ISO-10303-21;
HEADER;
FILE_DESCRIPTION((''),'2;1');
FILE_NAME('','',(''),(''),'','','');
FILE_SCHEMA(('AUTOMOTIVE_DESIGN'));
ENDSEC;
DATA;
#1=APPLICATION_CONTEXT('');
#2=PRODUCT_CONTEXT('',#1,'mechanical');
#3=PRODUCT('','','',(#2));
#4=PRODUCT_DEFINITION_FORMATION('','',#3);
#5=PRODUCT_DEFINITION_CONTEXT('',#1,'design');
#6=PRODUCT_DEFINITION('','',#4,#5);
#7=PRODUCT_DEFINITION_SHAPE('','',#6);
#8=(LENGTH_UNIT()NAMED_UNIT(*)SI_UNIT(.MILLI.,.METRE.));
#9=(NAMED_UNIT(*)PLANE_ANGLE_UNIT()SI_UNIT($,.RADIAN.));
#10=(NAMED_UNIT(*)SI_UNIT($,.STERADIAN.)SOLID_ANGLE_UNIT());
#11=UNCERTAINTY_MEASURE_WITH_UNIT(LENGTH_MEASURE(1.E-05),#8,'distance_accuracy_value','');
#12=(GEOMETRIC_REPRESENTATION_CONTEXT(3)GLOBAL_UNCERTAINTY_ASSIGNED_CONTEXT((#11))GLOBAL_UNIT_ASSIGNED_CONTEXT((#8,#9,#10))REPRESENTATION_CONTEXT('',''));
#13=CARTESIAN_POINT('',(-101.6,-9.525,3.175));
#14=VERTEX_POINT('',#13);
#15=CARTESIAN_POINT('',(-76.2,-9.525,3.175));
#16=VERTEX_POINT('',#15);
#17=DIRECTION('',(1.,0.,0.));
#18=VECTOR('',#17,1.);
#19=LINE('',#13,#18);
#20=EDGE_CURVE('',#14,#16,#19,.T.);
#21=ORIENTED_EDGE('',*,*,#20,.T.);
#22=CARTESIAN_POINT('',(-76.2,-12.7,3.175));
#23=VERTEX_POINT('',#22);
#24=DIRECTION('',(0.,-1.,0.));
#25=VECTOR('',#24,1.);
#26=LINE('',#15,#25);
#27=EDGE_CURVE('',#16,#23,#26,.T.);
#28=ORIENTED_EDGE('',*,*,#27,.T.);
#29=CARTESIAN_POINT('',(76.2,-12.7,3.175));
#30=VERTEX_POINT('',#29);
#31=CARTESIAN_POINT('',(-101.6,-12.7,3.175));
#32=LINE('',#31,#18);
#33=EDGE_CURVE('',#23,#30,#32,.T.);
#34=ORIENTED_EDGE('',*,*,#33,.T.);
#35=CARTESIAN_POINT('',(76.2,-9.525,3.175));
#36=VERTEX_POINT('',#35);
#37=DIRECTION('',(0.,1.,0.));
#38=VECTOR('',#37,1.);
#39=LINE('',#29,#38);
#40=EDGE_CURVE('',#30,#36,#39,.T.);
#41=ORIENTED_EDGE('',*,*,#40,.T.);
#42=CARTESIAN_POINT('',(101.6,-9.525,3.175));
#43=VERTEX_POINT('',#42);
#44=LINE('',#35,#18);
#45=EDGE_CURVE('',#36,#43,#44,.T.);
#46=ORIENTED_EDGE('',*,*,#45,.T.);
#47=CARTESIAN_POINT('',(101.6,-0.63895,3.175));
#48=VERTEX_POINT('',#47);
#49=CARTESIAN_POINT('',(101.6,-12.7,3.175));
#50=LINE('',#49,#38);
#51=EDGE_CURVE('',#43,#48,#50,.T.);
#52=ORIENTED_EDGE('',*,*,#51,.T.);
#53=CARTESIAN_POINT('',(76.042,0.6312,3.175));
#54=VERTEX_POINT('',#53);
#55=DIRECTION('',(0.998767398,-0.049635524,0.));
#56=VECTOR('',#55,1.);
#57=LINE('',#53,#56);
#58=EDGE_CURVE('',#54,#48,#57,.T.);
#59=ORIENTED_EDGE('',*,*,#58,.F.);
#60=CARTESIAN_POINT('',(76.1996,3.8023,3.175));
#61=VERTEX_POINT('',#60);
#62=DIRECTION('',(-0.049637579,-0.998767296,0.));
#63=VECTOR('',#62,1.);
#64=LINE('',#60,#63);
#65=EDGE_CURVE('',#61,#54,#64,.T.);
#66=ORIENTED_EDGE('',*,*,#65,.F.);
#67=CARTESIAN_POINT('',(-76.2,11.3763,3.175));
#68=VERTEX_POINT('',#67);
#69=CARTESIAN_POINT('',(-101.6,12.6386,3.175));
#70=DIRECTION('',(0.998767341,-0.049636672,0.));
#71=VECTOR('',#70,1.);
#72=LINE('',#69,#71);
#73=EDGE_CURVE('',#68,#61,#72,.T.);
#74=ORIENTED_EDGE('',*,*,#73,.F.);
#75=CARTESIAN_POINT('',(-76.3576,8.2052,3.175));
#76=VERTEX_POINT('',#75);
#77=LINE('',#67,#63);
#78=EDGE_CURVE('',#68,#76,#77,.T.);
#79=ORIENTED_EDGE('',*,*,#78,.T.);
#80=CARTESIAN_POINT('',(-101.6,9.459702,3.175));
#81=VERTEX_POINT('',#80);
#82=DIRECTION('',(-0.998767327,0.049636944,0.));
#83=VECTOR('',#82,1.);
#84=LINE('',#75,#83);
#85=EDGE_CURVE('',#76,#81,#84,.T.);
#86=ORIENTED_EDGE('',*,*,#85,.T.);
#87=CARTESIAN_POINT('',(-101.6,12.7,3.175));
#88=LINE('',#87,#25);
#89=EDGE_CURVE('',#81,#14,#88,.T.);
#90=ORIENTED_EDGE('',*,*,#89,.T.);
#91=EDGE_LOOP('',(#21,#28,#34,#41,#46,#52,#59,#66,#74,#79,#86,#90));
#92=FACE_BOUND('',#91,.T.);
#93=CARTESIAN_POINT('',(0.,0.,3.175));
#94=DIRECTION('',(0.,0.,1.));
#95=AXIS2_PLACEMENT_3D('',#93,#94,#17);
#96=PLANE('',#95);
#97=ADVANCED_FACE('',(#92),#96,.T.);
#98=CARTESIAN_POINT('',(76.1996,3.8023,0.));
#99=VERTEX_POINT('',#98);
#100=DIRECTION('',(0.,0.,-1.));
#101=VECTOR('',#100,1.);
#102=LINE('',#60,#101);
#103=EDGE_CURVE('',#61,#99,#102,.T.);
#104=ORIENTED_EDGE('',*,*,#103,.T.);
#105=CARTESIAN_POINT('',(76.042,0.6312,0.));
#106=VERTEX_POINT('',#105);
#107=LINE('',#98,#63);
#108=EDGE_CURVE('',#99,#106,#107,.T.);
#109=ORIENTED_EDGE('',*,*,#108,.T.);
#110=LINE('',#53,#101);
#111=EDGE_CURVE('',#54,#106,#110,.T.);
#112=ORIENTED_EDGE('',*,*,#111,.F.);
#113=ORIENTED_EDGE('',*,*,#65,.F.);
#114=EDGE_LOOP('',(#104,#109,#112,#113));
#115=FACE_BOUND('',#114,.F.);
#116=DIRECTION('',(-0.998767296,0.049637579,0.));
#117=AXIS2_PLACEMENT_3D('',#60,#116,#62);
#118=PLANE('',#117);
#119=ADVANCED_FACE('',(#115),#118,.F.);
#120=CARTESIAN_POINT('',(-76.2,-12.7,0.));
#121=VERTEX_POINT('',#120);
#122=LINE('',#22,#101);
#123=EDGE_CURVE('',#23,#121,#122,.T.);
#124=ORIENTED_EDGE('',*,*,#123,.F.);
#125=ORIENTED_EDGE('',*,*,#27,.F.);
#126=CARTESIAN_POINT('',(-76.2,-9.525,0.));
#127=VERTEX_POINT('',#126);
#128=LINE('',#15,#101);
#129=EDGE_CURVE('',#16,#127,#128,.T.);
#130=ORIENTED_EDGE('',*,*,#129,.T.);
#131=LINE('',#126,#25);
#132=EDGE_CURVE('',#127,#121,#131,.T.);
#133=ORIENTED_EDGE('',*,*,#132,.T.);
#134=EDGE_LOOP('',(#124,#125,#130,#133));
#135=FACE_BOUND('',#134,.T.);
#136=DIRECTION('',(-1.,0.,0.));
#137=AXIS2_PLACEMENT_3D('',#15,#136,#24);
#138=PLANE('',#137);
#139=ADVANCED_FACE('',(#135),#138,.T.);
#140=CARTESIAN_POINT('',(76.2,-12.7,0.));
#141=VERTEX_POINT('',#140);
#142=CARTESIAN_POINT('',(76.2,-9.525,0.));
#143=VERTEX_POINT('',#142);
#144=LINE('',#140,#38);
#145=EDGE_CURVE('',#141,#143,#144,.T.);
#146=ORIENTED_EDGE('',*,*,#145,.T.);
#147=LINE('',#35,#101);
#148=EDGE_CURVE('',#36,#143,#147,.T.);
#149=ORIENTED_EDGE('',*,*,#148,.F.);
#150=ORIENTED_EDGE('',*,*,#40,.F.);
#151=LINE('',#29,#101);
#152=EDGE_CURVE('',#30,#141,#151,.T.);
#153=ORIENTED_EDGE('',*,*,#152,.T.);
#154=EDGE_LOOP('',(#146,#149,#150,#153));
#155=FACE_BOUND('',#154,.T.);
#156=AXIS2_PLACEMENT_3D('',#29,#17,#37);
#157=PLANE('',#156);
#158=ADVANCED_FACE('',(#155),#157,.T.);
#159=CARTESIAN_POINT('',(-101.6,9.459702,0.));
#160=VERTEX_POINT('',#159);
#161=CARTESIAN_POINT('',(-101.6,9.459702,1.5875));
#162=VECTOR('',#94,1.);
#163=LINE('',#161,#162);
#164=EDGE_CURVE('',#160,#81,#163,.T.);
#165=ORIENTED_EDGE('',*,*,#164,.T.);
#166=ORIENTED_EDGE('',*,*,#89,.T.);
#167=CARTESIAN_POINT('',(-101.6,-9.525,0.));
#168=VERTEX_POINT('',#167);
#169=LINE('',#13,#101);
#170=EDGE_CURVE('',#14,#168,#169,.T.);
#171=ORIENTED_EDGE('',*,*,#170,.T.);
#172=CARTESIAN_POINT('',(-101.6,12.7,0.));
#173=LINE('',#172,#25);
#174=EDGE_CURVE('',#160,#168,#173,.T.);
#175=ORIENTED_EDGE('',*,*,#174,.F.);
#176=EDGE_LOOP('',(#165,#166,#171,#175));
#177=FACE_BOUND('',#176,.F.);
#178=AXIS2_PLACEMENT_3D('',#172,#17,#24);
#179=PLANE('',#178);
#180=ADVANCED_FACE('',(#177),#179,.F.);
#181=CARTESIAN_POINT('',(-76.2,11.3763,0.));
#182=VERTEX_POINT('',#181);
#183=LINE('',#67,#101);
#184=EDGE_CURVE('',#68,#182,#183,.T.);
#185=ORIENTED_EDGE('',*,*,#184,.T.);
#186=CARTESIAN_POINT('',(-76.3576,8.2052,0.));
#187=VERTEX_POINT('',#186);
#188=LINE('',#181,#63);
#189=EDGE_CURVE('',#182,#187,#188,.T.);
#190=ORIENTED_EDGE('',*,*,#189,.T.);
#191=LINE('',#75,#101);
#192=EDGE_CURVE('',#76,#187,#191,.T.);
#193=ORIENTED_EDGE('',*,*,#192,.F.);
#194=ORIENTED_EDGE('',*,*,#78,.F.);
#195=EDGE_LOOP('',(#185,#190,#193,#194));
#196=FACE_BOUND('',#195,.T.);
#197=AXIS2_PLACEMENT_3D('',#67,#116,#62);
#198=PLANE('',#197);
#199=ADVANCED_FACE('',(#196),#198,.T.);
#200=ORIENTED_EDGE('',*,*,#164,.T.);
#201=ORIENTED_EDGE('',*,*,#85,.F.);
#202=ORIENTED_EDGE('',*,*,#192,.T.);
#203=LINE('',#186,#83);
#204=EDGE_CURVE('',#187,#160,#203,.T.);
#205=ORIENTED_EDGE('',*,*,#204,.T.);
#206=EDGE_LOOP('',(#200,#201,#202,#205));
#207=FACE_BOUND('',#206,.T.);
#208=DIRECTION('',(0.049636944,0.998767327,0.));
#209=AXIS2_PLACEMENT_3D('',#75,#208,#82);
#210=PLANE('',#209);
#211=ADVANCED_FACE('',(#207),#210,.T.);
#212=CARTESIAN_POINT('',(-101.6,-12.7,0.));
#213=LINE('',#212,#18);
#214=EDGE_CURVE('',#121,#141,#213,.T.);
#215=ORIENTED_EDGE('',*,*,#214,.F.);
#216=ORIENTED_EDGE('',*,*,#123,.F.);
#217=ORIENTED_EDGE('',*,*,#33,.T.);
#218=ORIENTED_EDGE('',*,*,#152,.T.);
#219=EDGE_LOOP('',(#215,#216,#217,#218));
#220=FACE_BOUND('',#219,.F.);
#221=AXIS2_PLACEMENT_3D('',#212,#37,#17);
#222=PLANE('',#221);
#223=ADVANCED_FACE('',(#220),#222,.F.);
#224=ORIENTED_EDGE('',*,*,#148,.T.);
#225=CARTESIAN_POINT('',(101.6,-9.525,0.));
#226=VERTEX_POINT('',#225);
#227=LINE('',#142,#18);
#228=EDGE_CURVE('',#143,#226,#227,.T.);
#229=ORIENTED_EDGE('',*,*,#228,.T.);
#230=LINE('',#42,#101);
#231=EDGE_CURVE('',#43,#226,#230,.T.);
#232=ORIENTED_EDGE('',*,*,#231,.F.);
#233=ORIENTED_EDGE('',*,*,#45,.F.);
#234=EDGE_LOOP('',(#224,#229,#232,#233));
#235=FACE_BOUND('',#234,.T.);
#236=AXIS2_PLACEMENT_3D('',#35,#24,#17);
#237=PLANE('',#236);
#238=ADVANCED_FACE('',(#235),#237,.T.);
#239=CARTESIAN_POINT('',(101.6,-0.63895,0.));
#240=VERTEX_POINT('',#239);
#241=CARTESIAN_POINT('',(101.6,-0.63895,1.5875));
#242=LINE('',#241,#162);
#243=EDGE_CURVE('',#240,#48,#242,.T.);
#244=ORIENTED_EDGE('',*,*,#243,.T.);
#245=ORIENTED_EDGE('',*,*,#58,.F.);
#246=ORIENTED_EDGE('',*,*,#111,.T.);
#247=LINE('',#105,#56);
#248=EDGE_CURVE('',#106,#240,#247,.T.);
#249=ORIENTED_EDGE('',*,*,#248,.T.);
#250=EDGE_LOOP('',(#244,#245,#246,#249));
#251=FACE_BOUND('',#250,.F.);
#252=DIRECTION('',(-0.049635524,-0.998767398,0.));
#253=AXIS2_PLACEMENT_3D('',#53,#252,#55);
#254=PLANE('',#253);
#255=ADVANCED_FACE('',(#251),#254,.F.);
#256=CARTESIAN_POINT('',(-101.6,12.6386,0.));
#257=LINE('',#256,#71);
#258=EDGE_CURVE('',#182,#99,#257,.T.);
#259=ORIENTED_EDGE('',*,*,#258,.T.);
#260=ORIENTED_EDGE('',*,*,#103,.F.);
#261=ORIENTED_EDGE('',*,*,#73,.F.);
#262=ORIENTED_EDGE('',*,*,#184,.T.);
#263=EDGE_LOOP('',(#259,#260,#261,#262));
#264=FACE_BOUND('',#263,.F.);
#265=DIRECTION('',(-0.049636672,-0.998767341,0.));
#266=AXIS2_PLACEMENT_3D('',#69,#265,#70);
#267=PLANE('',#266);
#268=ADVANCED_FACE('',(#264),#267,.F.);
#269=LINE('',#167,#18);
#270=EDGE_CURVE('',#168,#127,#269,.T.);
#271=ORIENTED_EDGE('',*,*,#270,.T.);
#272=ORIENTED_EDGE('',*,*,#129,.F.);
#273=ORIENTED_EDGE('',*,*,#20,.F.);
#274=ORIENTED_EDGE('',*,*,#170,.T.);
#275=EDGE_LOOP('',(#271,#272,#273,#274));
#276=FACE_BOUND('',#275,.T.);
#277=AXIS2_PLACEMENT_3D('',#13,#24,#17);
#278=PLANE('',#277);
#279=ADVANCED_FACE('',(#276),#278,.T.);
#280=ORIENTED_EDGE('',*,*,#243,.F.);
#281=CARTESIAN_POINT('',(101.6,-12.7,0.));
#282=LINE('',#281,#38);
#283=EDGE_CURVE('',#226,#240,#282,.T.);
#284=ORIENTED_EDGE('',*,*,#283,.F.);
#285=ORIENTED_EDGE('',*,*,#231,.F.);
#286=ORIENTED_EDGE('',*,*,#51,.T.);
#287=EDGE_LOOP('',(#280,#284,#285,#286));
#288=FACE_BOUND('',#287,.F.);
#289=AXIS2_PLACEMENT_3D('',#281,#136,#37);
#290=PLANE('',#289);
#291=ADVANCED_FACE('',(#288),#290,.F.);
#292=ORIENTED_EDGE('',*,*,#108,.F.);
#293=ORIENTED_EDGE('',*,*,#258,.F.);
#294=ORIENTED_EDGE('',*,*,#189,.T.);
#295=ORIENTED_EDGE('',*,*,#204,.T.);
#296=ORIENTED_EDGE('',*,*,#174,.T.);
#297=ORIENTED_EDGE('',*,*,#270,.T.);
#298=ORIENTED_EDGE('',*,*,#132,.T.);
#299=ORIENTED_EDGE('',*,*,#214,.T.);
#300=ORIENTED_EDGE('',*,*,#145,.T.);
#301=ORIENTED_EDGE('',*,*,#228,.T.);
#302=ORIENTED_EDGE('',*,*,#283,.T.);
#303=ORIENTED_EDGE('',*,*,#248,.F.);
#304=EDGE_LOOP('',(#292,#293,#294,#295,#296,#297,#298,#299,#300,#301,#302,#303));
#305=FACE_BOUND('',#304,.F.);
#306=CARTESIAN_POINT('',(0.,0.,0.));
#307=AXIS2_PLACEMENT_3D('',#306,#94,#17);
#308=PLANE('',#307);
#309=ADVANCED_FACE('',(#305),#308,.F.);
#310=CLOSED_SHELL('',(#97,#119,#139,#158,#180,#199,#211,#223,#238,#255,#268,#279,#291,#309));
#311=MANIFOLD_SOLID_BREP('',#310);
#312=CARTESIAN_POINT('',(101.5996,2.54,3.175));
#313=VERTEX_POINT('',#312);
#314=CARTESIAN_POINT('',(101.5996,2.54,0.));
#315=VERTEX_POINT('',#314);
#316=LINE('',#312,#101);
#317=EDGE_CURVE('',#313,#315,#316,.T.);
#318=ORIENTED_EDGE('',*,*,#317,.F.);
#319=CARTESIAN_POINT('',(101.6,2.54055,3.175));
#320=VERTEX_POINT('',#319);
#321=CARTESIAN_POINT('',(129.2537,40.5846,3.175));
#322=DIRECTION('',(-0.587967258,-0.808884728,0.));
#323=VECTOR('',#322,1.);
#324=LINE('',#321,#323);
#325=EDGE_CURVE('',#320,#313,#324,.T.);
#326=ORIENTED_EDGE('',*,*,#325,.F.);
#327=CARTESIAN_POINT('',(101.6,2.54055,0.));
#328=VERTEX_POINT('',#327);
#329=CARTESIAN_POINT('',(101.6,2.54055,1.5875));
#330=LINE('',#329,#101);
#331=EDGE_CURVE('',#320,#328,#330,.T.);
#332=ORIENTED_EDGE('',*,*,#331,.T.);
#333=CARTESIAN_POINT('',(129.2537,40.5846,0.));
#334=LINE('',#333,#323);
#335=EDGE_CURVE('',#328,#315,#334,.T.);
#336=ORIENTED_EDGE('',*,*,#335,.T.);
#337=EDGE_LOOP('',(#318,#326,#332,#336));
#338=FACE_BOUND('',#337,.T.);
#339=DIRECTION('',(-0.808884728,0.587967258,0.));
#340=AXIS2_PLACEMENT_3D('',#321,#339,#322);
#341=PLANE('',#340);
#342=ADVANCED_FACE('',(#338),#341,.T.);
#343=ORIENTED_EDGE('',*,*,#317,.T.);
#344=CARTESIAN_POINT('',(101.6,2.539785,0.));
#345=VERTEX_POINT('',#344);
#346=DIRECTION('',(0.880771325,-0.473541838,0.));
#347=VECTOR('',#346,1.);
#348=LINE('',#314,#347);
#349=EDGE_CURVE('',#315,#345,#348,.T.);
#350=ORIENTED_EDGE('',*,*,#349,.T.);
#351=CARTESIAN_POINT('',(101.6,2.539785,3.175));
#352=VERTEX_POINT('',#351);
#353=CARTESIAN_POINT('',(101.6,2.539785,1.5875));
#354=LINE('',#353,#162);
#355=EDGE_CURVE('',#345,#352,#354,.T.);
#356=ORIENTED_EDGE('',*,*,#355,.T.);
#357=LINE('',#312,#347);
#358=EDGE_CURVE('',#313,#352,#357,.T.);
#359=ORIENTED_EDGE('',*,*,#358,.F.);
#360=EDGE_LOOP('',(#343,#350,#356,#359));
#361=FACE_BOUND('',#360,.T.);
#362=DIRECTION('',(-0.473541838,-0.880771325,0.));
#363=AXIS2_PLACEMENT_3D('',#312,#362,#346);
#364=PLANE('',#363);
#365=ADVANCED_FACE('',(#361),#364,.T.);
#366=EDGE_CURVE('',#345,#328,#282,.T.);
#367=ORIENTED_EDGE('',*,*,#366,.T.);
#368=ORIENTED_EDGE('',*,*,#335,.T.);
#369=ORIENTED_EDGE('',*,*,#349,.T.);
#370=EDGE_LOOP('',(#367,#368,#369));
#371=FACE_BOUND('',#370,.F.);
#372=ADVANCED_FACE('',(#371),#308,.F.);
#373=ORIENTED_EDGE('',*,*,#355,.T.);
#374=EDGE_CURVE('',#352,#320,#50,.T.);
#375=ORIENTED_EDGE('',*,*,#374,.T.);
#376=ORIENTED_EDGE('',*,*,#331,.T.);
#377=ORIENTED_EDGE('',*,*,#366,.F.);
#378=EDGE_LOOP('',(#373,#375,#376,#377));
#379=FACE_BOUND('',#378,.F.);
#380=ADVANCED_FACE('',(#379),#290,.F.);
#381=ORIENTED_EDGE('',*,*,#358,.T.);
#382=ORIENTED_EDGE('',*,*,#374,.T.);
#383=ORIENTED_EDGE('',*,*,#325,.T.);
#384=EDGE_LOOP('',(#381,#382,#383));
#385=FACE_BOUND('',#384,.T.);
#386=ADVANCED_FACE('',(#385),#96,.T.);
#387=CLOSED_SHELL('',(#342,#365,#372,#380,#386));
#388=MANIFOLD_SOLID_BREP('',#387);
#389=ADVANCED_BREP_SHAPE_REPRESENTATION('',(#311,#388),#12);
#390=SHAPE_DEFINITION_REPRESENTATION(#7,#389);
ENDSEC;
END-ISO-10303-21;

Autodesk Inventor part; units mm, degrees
ref_plane "YZ Plane" through (0, 0, 0) normal (1, 0, 0) x (0, 1, 0)
ref_plane "XZ Plane" through (0, 0, 0) normal (0, 1, 0) x (-1, 0, 0)
ref_plane "XY Plane" through (0, 0, 0) normal (0, 0, 1) x (1, 0, 0)
sketch "Sketch1" plane through (0, 0, 0) normal (0, 0, 1) x (1, 0, 0)
  line L0 (-101.6, -12.7) -> (101.6, -12.7)
  line L1 (101.6, -12.7) -> (101.6, 12.7)
  line L2 (101.6, 12.7) -> (-101.6, 12.7)
  line L3 (-101.6, 12.7) -> (-101.6, -12.7)
  line L4 (-101.6, -12.7) -> (101.6, 12.7) construction
  line L5 (101.6, -12.7) -> (-101.6, 12.7) construction
  point P0 (0, 0)
  dimension "d0" = 203.2
  dimension "d1" = 25.4
extrude "Extrusion1" add sketch "Sketch1" along normal blind 3.175
sketch "Sketch2" plane through (0, 0, 3.175) normal (0, 0, 1) x (1, 0, 0)
  line L0 (-101.6, -12.7) -> (101.6, -12.7) projected
  line L1 (-101.6, 12.6386) -> (101.5996, 2.54)
  line L2 (-101.6, 12.6386) -> (-115.0985, 49.6806)
  line L3 (-115.0985, 49.6806) -> (129.2537, 40.5846)
  line L4 (129.2537, 40.5846) -> (101.5996, 2.54)
  point P0 (0, 0)
  dimension "d4" = 15.24
extrude "Extrusion2" cut sketch "Sketch2" against normal blind 3.175
sketch "Sketch3" plane through (0, 0, 3.175) normal (0, 0, 1) x (1, 0, 0)
  line L0 (-76.2, 11.3763) -> (-78.9338, 11.5121)
  line L1 (-76.2, 11.3763) -> (-76.3576, 8.2052)
  line L2 (76.1996, 3.8023) -> (76.042, 0.6312)
  line L3 (-76.3576, 8.2052) -> (-113.4193, 10.0471)
  line L4 (-101.6, 12.6386) -> (-113.4193, 10.0471)
  line L5 (76.042, 0.6312) -> (108.1145, -0.9627)
  line L6 (101.5996, 2.54) -> (108.1145, -0.9627)
  line L7 (-76.2, 11.3763) -> (-101.6, 12.6386)
  line L8 (76.1996, 3.8023) -> (101.5996, 2.54)
  point P0 (0, 0)
  point P1 (-81.4529, 11.6373)
  point P2 (-101.6, -12.7664)
  dimension "d7" = 25.4
  dimension "d8" = 3.175
  dimension "d10" = 25.4
  dimension "d11" = 3.175
  dimension "d13" = 90
  dimension "d14" = 90
extrude "Extrusion3" cut sketch "Sketch3" against normal blind 3.175
sketch "Sketch4" plane through (0, 0, 3.175) normal (0, 0, 1) x (1, 0, 0)
  line L0 (-101.6, -12.7) -> (-101.6, -9.525)
  line L1 (-101.6, -9.525) -> (-76.2, -9.525)
  line L2 (-76.2, -9.525) -> (-76.2, -12.7)
  line L3 (-76.2, -12.7) -> (-101.6, -12.7)
  line L4 (101.6, -12.7) -> (76.2, -12.7)
  line L5 (76.2, -12.7) -> (76.2, -9.525)
  line L6 (76.2, -9.525) -> (101.6, -9.525)
  line L7 (101.6, -12.7) -> (101.6, -0.6389) projected
  line L8 (101.6, -9.525) -> (101.6, -12.7)
  point P0 (0, 0)
extrude "Extrusion4" cut sketch "Sketch4" against normal blind 3.175
properties part number "side board"
